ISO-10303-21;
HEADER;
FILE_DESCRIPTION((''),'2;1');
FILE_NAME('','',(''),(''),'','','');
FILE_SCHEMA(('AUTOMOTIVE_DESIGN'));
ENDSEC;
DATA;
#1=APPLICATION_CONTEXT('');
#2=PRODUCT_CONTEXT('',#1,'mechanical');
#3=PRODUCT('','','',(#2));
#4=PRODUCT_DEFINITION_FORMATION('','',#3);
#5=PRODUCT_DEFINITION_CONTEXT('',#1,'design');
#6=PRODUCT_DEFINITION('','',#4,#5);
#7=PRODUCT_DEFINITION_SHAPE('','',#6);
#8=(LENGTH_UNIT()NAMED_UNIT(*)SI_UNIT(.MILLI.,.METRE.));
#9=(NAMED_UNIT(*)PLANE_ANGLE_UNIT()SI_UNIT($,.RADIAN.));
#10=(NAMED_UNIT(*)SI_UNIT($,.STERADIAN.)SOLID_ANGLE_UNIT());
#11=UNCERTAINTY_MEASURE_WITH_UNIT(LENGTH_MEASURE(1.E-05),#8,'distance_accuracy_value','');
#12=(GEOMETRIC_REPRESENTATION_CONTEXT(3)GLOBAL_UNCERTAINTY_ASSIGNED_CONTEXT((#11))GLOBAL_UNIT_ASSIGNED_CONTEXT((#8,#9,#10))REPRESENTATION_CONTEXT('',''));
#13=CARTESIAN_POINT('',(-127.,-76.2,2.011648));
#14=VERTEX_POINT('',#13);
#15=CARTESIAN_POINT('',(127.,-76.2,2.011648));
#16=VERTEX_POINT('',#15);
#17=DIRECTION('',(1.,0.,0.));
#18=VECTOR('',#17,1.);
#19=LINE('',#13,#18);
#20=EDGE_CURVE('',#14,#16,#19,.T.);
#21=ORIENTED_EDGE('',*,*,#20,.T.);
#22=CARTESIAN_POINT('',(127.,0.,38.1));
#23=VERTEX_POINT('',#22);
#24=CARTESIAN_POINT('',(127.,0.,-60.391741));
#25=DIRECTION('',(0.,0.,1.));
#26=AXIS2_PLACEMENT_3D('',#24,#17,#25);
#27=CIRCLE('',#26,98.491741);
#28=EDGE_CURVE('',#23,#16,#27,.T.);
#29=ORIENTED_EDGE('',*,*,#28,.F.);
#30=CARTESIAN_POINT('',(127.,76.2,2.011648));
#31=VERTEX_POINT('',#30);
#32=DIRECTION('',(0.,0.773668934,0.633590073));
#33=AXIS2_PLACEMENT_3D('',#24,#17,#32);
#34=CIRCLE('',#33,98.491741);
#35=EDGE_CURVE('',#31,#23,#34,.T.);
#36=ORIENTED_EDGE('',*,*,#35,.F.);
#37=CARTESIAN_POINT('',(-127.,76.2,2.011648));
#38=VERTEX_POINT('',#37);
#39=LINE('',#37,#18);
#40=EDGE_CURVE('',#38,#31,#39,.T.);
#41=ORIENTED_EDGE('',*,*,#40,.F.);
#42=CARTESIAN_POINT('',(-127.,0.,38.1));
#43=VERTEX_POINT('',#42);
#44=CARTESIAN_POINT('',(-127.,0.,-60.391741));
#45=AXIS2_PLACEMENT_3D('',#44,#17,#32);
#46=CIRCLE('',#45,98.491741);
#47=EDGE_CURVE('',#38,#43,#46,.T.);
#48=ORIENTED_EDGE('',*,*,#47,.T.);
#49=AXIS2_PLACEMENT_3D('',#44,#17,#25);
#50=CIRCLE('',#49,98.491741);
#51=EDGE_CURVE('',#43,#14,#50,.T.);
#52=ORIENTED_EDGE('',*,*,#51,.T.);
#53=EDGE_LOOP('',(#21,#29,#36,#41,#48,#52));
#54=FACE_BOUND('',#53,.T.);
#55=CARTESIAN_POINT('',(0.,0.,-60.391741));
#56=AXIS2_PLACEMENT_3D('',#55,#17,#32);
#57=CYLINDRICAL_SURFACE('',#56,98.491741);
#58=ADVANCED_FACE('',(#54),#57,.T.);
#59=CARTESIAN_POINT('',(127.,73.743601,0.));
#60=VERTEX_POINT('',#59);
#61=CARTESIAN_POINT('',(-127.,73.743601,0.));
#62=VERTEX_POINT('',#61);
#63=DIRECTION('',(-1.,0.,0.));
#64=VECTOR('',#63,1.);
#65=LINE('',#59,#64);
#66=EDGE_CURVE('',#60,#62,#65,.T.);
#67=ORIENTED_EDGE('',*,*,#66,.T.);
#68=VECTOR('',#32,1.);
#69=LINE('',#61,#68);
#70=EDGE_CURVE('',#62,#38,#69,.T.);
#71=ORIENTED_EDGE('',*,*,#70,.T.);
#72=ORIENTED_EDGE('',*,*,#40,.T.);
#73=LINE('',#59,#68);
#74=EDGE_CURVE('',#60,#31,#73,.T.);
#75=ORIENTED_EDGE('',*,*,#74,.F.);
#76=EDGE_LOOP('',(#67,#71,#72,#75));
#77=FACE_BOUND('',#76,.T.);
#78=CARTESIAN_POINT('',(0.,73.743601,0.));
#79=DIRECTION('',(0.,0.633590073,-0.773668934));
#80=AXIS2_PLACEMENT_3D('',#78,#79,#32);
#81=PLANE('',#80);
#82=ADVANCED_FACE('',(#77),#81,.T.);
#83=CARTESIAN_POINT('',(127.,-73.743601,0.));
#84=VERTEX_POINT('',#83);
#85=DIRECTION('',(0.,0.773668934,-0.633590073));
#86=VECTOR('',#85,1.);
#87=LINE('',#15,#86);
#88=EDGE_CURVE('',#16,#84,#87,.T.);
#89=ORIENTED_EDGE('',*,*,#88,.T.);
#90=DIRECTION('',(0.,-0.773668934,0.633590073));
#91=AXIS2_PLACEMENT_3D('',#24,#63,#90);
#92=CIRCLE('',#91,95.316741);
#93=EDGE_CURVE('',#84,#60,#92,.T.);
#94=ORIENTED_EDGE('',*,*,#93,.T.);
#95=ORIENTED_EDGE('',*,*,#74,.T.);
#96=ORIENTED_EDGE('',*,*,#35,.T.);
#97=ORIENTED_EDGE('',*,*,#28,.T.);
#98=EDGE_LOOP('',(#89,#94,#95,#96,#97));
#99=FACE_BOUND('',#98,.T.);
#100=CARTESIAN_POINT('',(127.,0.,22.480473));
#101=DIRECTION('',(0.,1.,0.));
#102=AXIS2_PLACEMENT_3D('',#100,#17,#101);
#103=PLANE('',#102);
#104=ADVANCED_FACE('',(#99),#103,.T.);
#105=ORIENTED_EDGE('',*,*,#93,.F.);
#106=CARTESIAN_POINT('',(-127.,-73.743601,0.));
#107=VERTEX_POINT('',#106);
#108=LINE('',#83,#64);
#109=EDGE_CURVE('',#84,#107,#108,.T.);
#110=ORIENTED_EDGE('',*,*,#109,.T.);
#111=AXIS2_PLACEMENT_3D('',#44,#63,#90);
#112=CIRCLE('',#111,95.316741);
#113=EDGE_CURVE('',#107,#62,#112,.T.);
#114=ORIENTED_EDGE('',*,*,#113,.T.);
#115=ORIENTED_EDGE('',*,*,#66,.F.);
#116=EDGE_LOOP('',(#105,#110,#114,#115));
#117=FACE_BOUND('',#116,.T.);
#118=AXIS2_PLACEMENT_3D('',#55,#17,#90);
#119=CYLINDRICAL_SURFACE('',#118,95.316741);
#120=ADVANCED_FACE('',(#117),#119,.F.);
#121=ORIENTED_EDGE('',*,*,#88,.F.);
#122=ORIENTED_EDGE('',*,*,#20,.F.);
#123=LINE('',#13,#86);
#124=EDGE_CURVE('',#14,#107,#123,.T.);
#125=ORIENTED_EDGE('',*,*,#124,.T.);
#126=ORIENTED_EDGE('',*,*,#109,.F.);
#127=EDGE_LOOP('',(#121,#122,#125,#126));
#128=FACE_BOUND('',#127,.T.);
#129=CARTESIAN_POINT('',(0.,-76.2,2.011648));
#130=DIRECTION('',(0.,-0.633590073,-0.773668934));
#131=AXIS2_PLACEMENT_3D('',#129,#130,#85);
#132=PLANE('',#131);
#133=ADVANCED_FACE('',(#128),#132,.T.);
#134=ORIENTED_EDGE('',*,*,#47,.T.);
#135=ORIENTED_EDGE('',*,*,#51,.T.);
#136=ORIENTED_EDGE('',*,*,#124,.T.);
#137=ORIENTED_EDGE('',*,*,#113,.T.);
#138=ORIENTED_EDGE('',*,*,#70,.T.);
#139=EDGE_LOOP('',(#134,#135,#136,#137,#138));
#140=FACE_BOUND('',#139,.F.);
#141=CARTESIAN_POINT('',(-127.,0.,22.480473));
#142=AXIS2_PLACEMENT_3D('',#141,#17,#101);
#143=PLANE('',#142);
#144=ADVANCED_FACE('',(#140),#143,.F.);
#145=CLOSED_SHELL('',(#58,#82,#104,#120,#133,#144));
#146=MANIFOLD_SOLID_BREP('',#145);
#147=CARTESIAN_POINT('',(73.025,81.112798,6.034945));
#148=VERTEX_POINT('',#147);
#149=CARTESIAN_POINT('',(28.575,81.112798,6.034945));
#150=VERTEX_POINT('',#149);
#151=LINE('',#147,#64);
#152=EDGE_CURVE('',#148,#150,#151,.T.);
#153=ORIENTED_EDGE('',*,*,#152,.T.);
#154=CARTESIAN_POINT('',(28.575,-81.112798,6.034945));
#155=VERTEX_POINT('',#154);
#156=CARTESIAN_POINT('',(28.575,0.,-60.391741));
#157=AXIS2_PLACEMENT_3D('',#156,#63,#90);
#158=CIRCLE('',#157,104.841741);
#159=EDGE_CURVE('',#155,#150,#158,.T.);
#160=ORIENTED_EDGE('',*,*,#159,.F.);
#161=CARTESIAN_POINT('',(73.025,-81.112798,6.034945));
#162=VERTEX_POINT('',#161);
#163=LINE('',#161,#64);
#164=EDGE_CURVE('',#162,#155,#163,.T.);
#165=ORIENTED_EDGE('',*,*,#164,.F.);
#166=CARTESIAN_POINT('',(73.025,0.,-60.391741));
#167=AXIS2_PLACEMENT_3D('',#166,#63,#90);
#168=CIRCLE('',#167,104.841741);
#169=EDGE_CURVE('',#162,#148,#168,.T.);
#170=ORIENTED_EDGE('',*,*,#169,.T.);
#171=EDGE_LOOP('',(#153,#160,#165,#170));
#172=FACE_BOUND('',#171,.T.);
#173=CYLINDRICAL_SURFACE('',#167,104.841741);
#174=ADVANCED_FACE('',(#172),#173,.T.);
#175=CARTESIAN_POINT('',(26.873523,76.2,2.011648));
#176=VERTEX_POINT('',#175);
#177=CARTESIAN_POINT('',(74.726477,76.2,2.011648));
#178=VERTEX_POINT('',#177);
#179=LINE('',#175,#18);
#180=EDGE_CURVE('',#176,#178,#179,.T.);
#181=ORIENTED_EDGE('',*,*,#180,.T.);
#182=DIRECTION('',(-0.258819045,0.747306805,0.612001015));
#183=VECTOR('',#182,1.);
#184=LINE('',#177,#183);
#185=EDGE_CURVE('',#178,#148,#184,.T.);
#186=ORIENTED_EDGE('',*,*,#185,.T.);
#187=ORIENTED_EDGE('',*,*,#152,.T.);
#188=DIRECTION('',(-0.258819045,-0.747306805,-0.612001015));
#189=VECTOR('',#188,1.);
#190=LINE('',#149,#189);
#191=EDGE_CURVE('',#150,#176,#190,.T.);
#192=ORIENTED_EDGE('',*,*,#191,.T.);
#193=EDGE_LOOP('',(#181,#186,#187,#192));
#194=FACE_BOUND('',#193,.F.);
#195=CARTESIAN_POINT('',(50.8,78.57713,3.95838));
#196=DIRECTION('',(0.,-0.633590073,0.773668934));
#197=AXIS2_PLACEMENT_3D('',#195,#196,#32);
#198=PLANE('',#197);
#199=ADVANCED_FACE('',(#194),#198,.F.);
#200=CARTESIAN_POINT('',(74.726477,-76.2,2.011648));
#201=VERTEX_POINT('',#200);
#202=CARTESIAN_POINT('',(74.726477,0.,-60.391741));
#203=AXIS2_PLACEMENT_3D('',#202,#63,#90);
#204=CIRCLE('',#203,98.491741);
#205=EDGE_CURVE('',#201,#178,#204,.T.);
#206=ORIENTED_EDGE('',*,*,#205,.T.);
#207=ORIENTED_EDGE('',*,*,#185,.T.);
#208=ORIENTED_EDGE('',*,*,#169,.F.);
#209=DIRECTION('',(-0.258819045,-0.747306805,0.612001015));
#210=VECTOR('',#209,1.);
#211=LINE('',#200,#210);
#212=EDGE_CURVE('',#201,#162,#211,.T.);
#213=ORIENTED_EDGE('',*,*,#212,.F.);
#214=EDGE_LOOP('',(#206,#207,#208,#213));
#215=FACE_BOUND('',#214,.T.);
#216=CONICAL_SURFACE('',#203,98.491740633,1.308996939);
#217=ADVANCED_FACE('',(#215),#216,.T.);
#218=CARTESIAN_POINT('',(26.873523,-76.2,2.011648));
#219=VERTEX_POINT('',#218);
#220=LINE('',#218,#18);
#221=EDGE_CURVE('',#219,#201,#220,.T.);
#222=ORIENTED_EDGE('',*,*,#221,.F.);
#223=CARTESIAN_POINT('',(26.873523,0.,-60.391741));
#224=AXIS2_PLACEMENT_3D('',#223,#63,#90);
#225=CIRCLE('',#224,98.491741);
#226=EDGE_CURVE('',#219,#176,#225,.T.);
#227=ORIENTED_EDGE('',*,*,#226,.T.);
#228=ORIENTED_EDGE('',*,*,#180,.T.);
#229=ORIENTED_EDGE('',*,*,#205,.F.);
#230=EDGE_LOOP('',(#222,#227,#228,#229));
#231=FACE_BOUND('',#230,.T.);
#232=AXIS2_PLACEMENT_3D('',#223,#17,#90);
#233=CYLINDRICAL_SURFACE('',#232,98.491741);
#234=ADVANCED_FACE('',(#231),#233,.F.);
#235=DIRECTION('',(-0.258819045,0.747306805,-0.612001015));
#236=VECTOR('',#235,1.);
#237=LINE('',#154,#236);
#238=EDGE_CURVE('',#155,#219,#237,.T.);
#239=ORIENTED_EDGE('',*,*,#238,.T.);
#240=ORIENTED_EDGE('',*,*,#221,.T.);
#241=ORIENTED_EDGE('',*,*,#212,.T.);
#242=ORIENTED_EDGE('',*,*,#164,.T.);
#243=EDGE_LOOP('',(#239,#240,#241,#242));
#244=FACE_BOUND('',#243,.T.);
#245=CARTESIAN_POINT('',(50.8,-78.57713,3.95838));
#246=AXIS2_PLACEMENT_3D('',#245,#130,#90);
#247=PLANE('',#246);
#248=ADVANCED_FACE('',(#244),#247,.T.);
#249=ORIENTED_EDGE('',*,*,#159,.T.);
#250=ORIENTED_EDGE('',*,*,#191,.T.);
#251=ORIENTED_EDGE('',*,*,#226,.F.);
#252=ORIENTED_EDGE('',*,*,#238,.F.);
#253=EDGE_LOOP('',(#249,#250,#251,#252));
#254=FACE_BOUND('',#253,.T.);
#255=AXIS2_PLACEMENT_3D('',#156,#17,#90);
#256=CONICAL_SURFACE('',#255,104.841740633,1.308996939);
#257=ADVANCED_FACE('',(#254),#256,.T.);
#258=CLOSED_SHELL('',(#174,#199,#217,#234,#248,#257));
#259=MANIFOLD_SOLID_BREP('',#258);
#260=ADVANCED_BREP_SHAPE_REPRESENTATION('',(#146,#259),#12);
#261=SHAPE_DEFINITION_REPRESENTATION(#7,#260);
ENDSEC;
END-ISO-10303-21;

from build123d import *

# Parameters (mm, degrees)
F1_DEPTH = 127


# Not quite as in the source:
# - a feature of the source that left no trace in its solid (it failed there, or was rolled back) is left out


with BuildPart() as f1:
    # F0 (on Right) → F1 (new body, symmetric)
    with BuildSketch(Plane.YZ):
        with BuildLine():
            ThreePointArc((0, 34.925), (40.7978992511, 25.7523970758), (73.743601134, 0))
            Line((73.743601134, 0), (76.2, 2.011648481))
            ThreePointArc((76.2, 2.011648481), (42.1568770053, 28.6218577331), (0, 38.1))
            ThreePointArc((0, 38.1), (-42.1568770053, 28.6218577331), (-76.2, 2.011648481))
            Line((-76.2, 2.011648481), (-73.743601134, 0))
            ThreePointArc((-73.743601134, 0), (-40.7978992511, 25.7523970758), (0, 34.925))
        make_face()
    extrude(amount=F1_DEPTH, both=True)


with BuildPart() as f5:
    # F5: sweep along a path in F4
    with BuildLine(Plane.YZ.offset(75.5772160579)) as f5_path:
        ThreePointArc((-76.2, 2.011648481), (0, 38.1), (76.2, 2.011648481))
    # F2 (on face) → F5 (sweep)
    with BuildSketch(Plane(origin=(0, -29.6033643096, -36.1482988732), x_dir=(1, 0, 0), z_dir=(0, -0.6335900728, -0.7736689342))):
        Polygon((73.025, 66.5781332912), (50.8, 66.5781332912), (28.575, 66.5781332912), (26.8735226281, 60.2281332912), (74.7264773719, 60.2281332912), align=None)
    sweep(path=f5_path.line)


solid = Compound([f1.part, f5.part])
